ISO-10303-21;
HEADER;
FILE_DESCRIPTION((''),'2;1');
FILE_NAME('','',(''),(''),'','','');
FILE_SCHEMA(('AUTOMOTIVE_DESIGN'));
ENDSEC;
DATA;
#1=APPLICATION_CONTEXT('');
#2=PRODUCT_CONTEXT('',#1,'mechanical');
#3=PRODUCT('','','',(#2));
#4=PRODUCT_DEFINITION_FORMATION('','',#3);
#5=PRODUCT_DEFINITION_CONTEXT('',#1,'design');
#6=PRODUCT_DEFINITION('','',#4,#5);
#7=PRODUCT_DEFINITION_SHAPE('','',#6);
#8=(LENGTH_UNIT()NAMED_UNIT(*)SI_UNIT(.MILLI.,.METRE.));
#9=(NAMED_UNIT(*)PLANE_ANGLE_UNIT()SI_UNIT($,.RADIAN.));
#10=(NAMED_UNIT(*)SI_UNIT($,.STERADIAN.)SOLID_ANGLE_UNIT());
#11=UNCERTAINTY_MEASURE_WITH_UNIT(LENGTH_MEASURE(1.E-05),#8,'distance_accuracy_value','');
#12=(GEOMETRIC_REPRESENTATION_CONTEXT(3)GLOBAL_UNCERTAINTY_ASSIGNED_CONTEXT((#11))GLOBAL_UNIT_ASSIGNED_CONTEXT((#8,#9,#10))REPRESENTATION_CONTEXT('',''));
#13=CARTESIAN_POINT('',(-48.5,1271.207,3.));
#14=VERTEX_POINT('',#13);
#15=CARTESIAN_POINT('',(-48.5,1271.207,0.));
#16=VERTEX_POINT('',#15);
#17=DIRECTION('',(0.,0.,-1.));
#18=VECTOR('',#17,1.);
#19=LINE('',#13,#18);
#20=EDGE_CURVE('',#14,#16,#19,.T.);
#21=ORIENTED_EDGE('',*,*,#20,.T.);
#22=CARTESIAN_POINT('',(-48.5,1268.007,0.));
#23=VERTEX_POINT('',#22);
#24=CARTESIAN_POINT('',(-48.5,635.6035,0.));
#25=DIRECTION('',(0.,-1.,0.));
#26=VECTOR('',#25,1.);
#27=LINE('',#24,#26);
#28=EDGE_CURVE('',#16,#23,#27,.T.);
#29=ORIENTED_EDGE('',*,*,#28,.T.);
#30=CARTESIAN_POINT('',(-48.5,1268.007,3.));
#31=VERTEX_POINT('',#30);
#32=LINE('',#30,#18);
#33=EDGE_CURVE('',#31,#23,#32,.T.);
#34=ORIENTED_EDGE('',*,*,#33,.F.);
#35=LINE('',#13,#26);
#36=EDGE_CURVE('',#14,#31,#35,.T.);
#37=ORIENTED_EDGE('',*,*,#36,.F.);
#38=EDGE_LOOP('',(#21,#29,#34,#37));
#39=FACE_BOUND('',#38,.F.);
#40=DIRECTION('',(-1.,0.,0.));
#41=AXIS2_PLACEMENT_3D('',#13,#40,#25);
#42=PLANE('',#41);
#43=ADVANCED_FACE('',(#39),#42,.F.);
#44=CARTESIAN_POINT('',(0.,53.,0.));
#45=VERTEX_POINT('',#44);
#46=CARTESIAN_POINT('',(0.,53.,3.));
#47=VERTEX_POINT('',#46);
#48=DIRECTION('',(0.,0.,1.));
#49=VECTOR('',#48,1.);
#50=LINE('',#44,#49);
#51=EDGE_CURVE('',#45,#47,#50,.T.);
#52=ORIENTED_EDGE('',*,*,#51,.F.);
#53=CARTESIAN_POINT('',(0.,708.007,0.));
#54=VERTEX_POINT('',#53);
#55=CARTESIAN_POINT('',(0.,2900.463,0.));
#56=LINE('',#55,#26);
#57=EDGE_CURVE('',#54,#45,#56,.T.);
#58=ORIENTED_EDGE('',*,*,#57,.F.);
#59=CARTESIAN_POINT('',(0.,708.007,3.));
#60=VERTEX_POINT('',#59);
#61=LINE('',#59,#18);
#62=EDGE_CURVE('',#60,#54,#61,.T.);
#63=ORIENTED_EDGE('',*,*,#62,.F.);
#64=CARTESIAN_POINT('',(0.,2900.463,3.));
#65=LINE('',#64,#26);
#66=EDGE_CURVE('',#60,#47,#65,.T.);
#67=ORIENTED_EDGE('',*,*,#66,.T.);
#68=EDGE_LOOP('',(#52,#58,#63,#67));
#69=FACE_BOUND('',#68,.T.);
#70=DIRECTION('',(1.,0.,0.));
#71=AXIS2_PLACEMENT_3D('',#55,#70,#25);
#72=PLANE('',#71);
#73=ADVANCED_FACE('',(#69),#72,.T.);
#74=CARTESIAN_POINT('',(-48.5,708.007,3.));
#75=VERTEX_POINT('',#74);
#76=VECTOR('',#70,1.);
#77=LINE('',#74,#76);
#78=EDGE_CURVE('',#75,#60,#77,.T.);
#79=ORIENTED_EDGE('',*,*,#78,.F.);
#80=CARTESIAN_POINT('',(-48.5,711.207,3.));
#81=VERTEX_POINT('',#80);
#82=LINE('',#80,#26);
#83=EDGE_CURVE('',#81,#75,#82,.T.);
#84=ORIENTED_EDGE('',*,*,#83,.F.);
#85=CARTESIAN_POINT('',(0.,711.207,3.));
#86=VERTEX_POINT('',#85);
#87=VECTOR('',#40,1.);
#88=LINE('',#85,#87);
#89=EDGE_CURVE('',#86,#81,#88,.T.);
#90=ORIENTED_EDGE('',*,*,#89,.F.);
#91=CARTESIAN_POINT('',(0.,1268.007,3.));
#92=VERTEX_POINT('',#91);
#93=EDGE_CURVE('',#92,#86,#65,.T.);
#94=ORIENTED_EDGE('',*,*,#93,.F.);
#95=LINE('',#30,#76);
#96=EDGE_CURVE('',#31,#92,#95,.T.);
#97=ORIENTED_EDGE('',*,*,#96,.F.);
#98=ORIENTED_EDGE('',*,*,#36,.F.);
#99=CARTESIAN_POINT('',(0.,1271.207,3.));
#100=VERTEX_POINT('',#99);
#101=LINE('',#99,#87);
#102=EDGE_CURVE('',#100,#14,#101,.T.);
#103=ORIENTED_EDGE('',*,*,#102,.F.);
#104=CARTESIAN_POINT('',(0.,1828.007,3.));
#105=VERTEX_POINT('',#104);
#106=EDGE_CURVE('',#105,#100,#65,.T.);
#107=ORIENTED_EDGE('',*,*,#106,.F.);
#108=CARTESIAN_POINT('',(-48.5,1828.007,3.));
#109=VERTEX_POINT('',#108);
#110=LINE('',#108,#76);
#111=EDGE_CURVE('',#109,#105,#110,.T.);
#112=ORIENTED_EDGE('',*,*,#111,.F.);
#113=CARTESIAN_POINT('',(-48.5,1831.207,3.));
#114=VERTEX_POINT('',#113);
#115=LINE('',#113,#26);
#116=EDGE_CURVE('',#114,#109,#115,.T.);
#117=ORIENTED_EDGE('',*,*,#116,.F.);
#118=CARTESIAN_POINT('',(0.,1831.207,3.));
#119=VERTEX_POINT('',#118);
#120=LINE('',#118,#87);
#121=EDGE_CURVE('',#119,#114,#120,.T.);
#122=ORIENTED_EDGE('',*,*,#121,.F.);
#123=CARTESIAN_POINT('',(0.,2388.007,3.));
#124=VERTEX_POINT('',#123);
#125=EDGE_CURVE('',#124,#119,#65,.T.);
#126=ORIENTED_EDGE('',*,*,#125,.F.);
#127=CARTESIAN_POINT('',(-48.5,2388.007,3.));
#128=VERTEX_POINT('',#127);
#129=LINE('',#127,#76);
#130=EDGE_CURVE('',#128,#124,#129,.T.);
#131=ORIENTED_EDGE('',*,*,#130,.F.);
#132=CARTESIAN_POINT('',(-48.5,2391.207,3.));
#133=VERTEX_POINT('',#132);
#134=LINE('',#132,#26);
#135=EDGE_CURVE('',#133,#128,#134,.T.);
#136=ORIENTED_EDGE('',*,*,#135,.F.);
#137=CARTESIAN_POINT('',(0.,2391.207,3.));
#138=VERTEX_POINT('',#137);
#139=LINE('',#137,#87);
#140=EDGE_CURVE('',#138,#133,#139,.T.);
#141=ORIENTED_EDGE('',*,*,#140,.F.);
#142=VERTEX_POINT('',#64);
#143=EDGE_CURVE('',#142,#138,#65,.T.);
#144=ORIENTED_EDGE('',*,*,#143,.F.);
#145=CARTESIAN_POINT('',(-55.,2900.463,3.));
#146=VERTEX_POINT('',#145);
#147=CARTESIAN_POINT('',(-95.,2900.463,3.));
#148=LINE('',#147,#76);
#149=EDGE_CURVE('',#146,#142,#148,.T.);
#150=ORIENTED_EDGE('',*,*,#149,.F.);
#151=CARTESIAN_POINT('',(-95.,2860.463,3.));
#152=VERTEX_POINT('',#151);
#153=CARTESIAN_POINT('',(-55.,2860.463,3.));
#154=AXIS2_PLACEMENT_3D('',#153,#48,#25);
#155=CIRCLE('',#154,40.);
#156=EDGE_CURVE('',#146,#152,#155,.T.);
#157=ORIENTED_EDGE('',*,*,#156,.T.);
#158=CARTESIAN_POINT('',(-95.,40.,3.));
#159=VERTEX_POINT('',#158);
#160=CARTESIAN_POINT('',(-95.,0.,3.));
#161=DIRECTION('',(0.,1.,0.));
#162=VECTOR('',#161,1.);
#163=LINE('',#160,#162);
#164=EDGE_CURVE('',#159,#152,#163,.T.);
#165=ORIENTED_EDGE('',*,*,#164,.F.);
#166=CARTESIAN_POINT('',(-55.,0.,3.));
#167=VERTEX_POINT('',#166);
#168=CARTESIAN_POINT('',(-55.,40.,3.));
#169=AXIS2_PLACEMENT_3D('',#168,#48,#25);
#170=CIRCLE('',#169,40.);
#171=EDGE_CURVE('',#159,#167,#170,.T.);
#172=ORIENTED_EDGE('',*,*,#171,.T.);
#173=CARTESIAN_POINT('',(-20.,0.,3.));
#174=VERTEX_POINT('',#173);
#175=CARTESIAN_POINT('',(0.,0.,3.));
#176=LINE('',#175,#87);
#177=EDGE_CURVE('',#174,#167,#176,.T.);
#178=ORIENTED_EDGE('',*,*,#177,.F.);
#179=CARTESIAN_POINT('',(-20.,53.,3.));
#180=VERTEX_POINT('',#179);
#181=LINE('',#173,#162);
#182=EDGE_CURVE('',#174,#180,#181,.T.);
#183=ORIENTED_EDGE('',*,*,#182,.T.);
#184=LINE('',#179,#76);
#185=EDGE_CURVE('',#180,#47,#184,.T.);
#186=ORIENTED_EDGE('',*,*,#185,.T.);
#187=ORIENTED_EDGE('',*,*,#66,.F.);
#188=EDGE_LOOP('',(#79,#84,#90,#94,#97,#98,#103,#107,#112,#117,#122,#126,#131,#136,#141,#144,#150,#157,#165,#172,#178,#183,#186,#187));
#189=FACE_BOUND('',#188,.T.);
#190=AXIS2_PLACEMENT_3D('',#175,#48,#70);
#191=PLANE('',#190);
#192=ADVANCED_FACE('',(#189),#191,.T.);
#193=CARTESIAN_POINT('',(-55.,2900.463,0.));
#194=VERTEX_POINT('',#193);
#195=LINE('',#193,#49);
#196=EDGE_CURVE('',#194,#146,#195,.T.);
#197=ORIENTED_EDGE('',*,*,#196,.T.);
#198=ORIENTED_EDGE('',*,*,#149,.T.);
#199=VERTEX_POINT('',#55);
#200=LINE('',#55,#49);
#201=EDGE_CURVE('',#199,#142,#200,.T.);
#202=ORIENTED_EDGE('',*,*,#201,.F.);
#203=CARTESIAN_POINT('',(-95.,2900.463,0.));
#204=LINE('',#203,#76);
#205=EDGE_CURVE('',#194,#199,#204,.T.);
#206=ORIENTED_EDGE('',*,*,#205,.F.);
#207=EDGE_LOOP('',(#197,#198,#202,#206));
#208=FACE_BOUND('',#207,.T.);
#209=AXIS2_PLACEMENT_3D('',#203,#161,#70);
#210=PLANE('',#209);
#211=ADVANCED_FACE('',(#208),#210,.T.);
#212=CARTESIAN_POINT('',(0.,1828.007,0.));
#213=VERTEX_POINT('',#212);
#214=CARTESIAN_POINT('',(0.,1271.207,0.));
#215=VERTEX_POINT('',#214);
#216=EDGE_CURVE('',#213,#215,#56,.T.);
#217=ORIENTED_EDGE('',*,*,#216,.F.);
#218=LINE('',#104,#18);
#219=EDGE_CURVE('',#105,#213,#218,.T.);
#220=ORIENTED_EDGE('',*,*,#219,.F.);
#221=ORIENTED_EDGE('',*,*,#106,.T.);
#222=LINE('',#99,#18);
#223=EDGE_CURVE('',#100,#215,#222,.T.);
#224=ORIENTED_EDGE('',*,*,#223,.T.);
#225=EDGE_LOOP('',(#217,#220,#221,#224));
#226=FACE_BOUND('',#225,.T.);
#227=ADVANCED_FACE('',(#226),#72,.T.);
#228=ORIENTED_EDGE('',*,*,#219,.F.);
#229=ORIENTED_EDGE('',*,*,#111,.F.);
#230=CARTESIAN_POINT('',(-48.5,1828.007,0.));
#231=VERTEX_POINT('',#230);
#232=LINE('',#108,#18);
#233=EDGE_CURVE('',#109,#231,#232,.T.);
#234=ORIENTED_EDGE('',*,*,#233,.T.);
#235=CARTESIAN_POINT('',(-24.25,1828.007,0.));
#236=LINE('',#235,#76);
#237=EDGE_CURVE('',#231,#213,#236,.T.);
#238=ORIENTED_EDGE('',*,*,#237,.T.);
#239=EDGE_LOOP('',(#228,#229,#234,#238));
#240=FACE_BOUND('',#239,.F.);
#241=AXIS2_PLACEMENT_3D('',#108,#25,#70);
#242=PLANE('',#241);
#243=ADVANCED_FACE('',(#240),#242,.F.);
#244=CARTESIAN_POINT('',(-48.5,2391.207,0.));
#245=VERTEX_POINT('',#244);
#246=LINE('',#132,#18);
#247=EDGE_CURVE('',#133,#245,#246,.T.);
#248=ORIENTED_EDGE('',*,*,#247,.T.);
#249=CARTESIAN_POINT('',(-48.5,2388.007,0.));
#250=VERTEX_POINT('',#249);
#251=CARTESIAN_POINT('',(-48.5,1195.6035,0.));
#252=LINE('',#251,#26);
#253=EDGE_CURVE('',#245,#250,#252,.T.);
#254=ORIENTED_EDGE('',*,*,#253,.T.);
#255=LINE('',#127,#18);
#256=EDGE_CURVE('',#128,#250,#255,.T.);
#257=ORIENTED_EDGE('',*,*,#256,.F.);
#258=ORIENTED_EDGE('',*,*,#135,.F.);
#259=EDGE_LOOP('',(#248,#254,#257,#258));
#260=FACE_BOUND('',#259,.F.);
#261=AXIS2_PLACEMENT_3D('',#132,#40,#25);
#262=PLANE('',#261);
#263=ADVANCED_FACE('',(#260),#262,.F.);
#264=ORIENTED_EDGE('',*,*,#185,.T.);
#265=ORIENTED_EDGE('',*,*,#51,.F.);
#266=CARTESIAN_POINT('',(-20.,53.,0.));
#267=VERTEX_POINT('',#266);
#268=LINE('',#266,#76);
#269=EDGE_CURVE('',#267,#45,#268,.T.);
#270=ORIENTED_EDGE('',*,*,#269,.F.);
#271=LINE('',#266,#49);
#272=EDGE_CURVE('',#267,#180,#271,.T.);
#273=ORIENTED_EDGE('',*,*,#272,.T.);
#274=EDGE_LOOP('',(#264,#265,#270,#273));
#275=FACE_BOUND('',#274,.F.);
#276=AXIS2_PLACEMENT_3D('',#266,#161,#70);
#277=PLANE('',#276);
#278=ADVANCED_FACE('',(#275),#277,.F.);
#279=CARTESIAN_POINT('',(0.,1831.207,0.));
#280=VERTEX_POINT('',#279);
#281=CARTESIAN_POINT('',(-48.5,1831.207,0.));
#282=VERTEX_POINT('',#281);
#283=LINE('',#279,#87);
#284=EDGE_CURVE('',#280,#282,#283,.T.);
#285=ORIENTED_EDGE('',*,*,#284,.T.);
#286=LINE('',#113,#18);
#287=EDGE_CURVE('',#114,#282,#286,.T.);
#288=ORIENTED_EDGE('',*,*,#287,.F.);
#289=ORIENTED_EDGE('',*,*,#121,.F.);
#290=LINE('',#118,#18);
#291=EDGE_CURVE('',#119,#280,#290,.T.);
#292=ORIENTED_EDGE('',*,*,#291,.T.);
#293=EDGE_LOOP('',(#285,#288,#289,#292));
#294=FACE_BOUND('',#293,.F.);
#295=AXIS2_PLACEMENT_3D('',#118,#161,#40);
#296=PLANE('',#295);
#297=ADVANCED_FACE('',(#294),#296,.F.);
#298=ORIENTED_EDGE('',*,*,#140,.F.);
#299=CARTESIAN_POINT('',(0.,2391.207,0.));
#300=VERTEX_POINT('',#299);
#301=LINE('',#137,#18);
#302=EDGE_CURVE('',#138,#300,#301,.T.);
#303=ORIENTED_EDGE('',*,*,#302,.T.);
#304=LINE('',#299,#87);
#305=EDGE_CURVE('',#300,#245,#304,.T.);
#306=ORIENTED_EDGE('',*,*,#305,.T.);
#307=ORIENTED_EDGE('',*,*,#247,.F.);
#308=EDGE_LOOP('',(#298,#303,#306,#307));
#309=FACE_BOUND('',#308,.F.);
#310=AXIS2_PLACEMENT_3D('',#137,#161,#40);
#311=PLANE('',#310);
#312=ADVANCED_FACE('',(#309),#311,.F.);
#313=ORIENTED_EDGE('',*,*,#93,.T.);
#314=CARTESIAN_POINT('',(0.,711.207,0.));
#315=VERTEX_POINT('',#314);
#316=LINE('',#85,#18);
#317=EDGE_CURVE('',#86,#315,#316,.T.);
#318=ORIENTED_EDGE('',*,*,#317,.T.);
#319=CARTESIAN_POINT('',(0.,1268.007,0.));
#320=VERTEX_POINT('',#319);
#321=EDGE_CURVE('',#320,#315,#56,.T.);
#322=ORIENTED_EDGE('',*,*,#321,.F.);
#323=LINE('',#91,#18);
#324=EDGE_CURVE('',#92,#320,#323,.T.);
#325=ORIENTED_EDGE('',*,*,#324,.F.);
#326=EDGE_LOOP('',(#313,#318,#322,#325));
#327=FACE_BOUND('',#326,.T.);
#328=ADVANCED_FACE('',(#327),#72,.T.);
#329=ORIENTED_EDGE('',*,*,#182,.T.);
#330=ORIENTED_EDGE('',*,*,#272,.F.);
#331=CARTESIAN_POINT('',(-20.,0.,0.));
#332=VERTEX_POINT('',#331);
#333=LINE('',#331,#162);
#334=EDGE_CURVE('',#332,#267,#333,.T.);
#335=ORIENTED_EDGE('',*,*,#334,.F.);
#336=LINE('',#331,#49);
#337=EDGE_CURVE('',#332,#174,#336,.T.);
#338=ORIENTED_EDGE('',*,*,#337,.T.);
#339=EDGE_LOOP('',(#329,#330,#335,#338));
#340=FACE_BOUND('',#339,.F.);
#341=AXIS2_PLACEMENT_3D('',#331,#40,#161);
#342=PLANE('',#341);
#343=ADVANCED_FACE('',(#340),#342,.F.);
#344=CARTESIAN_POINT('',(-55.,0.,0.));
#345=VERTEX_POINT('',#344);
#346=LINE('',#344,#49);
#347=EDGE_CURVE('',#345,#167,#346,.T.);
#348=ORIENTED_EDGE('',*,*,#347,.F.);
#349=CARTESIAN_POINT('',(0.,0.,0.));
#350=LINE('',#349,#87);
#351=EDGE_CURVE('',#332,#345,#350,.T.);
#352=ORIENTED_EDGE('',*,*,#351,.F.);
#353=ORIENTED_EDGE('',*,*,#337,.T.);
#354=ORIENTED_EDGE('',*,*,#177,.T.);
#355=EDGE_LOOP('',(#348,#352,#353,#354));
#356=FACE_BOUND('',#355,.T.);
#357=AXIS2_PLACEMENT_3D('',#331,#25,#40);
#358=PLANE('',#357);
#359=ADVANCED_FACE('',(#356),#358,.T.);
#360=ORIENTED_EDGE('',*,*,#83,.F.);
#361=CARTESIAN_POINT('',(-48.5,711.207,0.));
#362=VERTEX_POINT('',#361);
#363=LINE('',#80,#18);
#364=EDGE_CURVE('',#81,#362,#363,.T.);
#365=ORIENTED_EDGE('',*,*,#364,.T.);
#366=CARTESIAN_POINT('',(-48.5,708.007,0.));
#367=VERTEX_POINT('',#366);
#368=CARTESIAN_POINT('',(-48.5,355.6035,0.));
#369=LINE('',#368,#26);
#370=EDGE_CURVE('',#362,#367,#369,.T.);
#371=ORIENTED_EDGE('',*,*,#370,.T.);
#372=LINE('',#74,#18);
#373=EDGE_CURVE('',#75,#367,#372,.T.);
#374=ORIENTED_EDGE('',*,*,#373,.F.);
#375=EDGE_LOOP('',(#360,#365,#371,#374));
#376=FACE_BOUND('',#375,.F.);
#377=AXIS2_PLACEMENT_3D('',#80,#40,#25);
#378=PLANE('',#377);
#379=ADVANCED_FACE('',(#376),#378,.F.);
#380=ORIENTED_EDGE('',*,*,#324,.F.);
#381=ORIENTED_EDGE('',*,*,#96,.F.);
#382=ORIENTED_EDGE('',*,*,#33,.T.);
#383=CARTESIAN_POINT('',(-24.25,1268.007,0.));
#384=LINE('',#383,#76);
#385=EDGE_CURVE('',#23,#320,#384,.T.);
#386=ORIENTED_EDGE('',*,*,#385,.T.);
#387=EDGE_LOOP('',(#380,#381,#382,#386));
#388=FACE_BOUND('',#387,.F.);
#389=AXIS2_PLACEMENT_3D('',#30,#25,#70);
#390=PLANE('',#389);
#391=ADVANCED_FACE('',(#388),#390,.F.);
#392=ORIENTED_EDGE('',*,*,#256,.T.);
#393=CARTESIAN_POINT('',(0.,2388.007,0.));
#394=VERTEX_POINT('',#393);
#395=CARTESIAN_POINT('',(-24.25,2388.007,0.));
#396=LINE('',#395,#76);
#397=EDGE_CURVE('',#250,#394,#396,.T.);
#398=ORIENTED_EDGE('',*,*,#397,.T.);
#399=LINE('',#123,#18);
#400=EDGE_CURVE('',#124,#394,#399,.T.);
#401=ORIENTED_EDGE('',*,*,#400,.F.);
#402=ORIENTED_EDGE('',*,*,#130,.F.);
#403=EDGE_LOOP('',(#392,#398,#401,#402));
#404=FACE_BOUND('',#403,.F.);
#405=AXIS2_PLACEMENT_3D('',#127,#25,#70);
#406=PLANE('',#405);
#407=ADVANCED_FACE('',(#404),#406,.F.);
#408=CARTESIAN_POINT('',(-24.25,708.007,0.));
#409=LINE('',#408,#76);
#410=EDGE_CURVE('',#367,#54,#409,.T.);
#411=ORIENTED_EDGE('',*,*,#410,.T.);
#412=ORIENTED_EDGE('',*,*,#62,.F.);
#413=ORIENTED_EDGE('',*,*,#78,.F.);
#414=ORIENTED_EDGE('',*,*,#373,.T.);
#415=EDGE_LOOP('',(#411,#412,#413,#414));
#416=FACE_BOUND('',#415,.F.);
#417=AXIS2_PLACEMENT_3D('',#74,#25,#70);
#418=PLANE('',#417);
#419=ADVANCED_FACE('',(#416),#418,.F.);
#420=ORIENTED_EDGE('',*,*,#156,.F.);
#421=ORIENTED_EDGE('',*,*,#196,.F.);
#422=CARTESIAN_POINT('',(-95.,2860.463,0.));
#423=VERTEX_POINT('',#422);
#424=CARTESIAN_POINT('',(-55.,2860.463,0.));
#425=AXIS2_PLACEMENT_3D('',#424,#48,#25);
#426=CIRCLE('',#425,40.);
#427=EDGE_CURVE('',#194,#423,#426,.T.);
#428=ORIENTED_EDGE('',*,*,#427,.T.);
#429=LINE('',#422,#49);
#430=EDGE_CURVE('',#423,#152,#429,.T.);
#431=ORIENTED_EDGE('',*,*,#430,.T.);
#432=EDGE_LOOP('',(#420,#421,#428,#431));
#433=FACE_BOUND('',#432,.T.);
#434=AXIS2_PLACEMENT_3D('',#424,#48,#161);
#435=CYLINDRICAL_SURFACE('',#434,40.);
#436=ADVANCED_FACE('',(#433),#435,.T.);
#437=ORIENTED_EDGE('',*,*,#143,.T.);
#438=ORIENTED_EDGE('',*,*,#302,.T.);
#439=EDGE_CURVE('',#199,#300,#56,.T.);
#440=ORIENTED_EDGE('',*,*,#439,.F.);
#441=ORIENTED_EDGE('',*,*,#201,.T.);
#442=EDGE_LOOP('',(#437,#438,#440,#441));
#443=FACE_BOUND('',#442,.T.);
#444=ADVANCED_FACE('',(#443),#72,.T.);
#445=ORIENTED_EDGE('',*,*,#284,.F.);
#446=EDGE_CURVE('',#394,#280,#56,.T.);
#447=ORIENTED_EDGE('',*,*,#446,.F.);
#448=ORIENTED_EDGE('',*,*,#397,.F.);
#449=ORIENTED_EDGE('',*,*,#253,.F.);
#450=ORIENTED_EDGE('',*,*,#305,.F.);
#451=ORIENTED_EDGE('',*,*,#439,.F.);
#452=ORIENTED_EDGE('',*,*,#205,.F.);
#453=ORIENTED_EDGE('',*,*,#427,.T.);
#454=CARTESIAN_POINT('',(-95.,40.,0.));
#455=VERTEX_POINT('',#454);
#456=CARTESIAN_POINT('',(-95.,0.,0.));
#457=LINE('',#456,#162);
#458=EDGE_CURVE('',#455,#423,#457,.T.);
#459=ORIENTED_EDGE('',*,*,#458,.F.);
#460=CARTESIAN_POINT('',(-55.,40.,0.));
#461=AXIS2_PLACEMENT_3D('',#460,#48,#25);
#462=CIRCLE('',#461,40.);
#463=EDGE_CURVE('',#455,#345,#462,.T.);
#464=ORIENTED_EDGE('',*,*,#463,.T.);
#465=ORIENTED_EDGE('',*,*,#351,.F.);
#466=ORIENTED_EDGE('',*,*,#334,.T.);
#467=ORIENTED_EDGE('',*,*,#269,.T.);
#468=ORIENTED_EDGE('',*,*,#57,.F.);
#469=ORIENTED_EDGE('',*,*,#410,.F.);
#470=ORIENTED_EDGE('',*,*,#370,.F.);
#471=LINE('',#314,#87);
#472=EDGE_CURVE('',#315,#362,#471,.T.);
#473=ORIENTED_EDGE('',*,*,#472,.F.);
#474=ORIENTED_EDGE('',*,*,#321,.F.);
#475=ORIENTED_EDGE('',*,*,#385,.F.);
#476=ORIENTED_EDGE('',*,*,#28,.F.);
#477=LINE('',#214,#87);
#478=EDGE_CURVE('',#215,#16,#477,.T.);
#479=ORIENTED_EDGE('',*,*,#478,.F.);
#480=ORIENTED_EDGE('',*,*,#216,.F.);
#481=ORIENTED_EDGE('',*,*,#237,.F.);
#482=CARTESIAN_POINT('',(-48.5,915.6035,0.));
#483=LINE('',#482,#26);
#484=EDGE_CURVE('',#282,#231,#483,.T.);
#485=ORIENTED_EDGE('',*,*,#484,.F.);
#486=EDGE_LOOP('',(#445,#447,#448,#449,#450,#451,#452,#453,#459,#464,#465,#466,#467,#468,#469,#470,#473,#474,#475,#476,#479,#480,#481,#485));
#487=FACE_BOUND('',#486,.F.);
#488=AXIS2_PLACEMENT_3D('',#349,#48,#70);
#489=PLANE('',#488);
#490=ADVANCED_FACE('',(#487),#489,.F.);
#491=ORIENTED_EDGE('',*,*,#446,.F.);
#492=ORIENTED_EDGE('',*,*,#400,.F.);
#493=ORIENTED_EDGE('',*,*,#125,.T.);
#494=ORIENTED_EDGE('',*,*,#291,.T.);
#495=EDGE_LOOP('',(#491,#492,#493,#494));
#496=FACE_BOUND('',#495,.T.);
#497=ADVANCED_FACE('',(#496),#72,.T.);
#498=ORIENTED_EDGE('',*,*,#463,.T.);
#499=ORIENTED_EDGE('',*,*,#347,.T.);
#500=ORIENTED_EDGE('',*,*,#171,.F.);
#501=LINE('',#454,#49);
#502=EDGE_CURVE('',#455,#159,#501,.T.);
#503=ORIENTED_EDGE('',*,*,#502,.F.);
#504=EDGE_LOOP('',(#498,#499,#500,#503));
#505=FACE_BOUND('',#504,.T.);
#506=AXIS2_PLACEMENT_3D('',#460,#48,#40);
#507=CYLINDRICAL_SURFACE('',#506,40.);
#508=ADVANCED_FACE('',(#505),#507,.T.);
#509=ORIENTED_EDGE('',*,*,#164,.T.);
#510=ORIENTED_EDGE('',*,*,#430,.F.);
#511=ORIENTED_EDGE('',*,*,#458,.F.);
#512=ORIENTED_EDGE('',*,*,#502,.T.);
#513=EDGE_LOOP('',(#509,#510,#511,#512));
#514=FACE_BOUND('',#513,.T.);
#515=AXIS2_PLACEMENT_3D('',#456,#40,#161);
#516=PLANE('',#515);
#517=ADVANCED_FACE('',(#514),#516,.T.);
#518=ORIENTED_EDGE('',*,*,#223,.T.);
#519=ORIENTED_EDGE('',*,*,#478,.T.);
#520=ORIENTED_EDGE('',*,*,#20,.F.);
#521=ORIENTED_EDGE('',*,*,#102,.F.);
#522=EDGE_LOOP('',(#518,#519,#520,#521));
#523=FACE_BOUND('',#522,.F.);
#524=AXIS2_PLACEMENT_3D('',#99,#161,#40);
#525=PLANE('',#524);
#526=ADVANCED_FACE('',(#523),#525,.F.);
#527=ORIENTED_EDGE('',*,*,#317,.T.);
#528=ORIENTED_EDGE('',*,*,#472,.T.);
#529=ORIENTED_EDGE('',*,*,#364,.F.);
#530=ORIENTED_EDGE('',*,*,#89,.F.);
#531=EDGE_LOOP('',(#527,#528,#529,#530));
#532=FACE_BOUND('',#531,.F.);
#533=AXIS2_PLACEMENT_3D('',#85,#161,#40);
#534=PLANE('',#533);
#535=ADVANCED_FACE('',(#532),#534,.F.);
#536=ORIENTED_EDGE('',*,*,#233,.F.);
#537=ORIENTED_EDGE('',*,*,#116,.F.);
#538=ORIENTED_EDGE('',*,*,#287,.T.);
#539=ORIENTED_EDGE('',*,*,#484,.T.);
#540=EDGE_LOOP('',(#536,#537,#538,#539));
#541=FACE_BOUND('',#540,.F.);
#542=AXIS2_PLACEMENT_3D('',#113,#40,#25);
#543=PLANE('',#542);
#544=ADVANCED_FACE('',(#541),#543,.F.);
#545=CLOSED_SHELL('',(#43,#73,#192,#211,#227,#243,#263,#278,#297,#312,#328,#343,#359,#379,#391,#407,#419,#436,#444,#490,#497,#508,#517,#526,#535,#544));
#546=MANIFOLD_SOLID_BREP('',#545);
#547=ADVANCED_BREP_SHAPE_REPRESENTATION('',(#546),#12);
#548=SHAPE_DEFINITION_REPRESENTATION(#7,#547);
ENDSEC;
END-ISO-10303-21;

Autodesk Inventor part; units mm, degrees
ref_plane "YZ Plane" through (0, 0, 0) normal (1, 0, 0) x (0, 1, 0)
ref_plane "XZ Plane" through (0, 0, 0) normal (0, 1, 0) x (-1, 0, 0)
ref_plane "XY Plane" through (0, 0, 0) normal (0, 0, 1) x (1, 0, 0)
sketch "Sketch1" plane through (0, 0, 0) normal (0, 0, 1) x (1, 0, 0)
  line L0 (-95, 2900.463) -> (0, 2900.463)
  line L1 (0, 2900.463) -> (0, 0)
  line L2 (0, 0) -> (-95, 0)
  line L3 (-95, 0) -> (-95, 2900.463)
  line L4 (-20, 53) -> (0, 53)
  line L5 (0, 53) -> (0, 0)
  line L6 (0, 0) -> (-20, 0)
  line L7 (-20, 0) -> (-20, 53)
  dimension "d0" = 95
  dimension "d1" = 2900.463
  dimension "d10" = 20
  dimension "d11" = 53
extrude "Plate1" add sketch "Sketch1" along normal blind 3 contours L0 L1 L4 L7 L2 L3
sketch "Sketch2" plane through (0, 0, 3) normal (0, 0, 1) x (1, 0, 0)
  line L0 (0, 0) -> (0, 2900.463) projected
  line L1 (0, 2391.207) -> (-48.5, 2391.207)
  line L2 (-48.5, 2391.207) -> (-48.5, 2388.007)
  line L3 (-48.5, 2388.007) -> (0, 2388.007)
  line L4 (0, 2388.007) -> (0, 2391.207)
  point P0 (0, 2388.007)
  dimension "d3" = 509.256
  dimension "d4" = 3.2
  dimension "d5" = 48.5
extrude "Extrusion1" cut sketch "Sketch2" against normal through all
pattern_linear "Rectangular Pattern1" count 4 spacing 560 along (0, -1, 0) of "Extrusion1"
fillet "Corner Round1" radius 40 2 edges at (-95, 2900.463, 1.5) (-95, 0, 1.5)
equation "\"d2\" = Thickness"
equation "\"BendReliefWidth\" = Thickness"
equation "\"BendReliefDepth\" = 0.5 * Thickness"
equation "\"CornerReliefSize\" = 4 * Thickness"
equation "\"MinimumRemnant\" = 2 * Thickness"
equation "\"TransitionRadius\" = BendRadius"
equation "\"JacobiRadiusSize\" = BendRadius"
equation "\"GapSize\" = Thickness"
equation "\"Thickness\" = 3"
equation "\"BendRadius\" = 5"
properties part number "BSH 023 rib butt end" material "Steel"
